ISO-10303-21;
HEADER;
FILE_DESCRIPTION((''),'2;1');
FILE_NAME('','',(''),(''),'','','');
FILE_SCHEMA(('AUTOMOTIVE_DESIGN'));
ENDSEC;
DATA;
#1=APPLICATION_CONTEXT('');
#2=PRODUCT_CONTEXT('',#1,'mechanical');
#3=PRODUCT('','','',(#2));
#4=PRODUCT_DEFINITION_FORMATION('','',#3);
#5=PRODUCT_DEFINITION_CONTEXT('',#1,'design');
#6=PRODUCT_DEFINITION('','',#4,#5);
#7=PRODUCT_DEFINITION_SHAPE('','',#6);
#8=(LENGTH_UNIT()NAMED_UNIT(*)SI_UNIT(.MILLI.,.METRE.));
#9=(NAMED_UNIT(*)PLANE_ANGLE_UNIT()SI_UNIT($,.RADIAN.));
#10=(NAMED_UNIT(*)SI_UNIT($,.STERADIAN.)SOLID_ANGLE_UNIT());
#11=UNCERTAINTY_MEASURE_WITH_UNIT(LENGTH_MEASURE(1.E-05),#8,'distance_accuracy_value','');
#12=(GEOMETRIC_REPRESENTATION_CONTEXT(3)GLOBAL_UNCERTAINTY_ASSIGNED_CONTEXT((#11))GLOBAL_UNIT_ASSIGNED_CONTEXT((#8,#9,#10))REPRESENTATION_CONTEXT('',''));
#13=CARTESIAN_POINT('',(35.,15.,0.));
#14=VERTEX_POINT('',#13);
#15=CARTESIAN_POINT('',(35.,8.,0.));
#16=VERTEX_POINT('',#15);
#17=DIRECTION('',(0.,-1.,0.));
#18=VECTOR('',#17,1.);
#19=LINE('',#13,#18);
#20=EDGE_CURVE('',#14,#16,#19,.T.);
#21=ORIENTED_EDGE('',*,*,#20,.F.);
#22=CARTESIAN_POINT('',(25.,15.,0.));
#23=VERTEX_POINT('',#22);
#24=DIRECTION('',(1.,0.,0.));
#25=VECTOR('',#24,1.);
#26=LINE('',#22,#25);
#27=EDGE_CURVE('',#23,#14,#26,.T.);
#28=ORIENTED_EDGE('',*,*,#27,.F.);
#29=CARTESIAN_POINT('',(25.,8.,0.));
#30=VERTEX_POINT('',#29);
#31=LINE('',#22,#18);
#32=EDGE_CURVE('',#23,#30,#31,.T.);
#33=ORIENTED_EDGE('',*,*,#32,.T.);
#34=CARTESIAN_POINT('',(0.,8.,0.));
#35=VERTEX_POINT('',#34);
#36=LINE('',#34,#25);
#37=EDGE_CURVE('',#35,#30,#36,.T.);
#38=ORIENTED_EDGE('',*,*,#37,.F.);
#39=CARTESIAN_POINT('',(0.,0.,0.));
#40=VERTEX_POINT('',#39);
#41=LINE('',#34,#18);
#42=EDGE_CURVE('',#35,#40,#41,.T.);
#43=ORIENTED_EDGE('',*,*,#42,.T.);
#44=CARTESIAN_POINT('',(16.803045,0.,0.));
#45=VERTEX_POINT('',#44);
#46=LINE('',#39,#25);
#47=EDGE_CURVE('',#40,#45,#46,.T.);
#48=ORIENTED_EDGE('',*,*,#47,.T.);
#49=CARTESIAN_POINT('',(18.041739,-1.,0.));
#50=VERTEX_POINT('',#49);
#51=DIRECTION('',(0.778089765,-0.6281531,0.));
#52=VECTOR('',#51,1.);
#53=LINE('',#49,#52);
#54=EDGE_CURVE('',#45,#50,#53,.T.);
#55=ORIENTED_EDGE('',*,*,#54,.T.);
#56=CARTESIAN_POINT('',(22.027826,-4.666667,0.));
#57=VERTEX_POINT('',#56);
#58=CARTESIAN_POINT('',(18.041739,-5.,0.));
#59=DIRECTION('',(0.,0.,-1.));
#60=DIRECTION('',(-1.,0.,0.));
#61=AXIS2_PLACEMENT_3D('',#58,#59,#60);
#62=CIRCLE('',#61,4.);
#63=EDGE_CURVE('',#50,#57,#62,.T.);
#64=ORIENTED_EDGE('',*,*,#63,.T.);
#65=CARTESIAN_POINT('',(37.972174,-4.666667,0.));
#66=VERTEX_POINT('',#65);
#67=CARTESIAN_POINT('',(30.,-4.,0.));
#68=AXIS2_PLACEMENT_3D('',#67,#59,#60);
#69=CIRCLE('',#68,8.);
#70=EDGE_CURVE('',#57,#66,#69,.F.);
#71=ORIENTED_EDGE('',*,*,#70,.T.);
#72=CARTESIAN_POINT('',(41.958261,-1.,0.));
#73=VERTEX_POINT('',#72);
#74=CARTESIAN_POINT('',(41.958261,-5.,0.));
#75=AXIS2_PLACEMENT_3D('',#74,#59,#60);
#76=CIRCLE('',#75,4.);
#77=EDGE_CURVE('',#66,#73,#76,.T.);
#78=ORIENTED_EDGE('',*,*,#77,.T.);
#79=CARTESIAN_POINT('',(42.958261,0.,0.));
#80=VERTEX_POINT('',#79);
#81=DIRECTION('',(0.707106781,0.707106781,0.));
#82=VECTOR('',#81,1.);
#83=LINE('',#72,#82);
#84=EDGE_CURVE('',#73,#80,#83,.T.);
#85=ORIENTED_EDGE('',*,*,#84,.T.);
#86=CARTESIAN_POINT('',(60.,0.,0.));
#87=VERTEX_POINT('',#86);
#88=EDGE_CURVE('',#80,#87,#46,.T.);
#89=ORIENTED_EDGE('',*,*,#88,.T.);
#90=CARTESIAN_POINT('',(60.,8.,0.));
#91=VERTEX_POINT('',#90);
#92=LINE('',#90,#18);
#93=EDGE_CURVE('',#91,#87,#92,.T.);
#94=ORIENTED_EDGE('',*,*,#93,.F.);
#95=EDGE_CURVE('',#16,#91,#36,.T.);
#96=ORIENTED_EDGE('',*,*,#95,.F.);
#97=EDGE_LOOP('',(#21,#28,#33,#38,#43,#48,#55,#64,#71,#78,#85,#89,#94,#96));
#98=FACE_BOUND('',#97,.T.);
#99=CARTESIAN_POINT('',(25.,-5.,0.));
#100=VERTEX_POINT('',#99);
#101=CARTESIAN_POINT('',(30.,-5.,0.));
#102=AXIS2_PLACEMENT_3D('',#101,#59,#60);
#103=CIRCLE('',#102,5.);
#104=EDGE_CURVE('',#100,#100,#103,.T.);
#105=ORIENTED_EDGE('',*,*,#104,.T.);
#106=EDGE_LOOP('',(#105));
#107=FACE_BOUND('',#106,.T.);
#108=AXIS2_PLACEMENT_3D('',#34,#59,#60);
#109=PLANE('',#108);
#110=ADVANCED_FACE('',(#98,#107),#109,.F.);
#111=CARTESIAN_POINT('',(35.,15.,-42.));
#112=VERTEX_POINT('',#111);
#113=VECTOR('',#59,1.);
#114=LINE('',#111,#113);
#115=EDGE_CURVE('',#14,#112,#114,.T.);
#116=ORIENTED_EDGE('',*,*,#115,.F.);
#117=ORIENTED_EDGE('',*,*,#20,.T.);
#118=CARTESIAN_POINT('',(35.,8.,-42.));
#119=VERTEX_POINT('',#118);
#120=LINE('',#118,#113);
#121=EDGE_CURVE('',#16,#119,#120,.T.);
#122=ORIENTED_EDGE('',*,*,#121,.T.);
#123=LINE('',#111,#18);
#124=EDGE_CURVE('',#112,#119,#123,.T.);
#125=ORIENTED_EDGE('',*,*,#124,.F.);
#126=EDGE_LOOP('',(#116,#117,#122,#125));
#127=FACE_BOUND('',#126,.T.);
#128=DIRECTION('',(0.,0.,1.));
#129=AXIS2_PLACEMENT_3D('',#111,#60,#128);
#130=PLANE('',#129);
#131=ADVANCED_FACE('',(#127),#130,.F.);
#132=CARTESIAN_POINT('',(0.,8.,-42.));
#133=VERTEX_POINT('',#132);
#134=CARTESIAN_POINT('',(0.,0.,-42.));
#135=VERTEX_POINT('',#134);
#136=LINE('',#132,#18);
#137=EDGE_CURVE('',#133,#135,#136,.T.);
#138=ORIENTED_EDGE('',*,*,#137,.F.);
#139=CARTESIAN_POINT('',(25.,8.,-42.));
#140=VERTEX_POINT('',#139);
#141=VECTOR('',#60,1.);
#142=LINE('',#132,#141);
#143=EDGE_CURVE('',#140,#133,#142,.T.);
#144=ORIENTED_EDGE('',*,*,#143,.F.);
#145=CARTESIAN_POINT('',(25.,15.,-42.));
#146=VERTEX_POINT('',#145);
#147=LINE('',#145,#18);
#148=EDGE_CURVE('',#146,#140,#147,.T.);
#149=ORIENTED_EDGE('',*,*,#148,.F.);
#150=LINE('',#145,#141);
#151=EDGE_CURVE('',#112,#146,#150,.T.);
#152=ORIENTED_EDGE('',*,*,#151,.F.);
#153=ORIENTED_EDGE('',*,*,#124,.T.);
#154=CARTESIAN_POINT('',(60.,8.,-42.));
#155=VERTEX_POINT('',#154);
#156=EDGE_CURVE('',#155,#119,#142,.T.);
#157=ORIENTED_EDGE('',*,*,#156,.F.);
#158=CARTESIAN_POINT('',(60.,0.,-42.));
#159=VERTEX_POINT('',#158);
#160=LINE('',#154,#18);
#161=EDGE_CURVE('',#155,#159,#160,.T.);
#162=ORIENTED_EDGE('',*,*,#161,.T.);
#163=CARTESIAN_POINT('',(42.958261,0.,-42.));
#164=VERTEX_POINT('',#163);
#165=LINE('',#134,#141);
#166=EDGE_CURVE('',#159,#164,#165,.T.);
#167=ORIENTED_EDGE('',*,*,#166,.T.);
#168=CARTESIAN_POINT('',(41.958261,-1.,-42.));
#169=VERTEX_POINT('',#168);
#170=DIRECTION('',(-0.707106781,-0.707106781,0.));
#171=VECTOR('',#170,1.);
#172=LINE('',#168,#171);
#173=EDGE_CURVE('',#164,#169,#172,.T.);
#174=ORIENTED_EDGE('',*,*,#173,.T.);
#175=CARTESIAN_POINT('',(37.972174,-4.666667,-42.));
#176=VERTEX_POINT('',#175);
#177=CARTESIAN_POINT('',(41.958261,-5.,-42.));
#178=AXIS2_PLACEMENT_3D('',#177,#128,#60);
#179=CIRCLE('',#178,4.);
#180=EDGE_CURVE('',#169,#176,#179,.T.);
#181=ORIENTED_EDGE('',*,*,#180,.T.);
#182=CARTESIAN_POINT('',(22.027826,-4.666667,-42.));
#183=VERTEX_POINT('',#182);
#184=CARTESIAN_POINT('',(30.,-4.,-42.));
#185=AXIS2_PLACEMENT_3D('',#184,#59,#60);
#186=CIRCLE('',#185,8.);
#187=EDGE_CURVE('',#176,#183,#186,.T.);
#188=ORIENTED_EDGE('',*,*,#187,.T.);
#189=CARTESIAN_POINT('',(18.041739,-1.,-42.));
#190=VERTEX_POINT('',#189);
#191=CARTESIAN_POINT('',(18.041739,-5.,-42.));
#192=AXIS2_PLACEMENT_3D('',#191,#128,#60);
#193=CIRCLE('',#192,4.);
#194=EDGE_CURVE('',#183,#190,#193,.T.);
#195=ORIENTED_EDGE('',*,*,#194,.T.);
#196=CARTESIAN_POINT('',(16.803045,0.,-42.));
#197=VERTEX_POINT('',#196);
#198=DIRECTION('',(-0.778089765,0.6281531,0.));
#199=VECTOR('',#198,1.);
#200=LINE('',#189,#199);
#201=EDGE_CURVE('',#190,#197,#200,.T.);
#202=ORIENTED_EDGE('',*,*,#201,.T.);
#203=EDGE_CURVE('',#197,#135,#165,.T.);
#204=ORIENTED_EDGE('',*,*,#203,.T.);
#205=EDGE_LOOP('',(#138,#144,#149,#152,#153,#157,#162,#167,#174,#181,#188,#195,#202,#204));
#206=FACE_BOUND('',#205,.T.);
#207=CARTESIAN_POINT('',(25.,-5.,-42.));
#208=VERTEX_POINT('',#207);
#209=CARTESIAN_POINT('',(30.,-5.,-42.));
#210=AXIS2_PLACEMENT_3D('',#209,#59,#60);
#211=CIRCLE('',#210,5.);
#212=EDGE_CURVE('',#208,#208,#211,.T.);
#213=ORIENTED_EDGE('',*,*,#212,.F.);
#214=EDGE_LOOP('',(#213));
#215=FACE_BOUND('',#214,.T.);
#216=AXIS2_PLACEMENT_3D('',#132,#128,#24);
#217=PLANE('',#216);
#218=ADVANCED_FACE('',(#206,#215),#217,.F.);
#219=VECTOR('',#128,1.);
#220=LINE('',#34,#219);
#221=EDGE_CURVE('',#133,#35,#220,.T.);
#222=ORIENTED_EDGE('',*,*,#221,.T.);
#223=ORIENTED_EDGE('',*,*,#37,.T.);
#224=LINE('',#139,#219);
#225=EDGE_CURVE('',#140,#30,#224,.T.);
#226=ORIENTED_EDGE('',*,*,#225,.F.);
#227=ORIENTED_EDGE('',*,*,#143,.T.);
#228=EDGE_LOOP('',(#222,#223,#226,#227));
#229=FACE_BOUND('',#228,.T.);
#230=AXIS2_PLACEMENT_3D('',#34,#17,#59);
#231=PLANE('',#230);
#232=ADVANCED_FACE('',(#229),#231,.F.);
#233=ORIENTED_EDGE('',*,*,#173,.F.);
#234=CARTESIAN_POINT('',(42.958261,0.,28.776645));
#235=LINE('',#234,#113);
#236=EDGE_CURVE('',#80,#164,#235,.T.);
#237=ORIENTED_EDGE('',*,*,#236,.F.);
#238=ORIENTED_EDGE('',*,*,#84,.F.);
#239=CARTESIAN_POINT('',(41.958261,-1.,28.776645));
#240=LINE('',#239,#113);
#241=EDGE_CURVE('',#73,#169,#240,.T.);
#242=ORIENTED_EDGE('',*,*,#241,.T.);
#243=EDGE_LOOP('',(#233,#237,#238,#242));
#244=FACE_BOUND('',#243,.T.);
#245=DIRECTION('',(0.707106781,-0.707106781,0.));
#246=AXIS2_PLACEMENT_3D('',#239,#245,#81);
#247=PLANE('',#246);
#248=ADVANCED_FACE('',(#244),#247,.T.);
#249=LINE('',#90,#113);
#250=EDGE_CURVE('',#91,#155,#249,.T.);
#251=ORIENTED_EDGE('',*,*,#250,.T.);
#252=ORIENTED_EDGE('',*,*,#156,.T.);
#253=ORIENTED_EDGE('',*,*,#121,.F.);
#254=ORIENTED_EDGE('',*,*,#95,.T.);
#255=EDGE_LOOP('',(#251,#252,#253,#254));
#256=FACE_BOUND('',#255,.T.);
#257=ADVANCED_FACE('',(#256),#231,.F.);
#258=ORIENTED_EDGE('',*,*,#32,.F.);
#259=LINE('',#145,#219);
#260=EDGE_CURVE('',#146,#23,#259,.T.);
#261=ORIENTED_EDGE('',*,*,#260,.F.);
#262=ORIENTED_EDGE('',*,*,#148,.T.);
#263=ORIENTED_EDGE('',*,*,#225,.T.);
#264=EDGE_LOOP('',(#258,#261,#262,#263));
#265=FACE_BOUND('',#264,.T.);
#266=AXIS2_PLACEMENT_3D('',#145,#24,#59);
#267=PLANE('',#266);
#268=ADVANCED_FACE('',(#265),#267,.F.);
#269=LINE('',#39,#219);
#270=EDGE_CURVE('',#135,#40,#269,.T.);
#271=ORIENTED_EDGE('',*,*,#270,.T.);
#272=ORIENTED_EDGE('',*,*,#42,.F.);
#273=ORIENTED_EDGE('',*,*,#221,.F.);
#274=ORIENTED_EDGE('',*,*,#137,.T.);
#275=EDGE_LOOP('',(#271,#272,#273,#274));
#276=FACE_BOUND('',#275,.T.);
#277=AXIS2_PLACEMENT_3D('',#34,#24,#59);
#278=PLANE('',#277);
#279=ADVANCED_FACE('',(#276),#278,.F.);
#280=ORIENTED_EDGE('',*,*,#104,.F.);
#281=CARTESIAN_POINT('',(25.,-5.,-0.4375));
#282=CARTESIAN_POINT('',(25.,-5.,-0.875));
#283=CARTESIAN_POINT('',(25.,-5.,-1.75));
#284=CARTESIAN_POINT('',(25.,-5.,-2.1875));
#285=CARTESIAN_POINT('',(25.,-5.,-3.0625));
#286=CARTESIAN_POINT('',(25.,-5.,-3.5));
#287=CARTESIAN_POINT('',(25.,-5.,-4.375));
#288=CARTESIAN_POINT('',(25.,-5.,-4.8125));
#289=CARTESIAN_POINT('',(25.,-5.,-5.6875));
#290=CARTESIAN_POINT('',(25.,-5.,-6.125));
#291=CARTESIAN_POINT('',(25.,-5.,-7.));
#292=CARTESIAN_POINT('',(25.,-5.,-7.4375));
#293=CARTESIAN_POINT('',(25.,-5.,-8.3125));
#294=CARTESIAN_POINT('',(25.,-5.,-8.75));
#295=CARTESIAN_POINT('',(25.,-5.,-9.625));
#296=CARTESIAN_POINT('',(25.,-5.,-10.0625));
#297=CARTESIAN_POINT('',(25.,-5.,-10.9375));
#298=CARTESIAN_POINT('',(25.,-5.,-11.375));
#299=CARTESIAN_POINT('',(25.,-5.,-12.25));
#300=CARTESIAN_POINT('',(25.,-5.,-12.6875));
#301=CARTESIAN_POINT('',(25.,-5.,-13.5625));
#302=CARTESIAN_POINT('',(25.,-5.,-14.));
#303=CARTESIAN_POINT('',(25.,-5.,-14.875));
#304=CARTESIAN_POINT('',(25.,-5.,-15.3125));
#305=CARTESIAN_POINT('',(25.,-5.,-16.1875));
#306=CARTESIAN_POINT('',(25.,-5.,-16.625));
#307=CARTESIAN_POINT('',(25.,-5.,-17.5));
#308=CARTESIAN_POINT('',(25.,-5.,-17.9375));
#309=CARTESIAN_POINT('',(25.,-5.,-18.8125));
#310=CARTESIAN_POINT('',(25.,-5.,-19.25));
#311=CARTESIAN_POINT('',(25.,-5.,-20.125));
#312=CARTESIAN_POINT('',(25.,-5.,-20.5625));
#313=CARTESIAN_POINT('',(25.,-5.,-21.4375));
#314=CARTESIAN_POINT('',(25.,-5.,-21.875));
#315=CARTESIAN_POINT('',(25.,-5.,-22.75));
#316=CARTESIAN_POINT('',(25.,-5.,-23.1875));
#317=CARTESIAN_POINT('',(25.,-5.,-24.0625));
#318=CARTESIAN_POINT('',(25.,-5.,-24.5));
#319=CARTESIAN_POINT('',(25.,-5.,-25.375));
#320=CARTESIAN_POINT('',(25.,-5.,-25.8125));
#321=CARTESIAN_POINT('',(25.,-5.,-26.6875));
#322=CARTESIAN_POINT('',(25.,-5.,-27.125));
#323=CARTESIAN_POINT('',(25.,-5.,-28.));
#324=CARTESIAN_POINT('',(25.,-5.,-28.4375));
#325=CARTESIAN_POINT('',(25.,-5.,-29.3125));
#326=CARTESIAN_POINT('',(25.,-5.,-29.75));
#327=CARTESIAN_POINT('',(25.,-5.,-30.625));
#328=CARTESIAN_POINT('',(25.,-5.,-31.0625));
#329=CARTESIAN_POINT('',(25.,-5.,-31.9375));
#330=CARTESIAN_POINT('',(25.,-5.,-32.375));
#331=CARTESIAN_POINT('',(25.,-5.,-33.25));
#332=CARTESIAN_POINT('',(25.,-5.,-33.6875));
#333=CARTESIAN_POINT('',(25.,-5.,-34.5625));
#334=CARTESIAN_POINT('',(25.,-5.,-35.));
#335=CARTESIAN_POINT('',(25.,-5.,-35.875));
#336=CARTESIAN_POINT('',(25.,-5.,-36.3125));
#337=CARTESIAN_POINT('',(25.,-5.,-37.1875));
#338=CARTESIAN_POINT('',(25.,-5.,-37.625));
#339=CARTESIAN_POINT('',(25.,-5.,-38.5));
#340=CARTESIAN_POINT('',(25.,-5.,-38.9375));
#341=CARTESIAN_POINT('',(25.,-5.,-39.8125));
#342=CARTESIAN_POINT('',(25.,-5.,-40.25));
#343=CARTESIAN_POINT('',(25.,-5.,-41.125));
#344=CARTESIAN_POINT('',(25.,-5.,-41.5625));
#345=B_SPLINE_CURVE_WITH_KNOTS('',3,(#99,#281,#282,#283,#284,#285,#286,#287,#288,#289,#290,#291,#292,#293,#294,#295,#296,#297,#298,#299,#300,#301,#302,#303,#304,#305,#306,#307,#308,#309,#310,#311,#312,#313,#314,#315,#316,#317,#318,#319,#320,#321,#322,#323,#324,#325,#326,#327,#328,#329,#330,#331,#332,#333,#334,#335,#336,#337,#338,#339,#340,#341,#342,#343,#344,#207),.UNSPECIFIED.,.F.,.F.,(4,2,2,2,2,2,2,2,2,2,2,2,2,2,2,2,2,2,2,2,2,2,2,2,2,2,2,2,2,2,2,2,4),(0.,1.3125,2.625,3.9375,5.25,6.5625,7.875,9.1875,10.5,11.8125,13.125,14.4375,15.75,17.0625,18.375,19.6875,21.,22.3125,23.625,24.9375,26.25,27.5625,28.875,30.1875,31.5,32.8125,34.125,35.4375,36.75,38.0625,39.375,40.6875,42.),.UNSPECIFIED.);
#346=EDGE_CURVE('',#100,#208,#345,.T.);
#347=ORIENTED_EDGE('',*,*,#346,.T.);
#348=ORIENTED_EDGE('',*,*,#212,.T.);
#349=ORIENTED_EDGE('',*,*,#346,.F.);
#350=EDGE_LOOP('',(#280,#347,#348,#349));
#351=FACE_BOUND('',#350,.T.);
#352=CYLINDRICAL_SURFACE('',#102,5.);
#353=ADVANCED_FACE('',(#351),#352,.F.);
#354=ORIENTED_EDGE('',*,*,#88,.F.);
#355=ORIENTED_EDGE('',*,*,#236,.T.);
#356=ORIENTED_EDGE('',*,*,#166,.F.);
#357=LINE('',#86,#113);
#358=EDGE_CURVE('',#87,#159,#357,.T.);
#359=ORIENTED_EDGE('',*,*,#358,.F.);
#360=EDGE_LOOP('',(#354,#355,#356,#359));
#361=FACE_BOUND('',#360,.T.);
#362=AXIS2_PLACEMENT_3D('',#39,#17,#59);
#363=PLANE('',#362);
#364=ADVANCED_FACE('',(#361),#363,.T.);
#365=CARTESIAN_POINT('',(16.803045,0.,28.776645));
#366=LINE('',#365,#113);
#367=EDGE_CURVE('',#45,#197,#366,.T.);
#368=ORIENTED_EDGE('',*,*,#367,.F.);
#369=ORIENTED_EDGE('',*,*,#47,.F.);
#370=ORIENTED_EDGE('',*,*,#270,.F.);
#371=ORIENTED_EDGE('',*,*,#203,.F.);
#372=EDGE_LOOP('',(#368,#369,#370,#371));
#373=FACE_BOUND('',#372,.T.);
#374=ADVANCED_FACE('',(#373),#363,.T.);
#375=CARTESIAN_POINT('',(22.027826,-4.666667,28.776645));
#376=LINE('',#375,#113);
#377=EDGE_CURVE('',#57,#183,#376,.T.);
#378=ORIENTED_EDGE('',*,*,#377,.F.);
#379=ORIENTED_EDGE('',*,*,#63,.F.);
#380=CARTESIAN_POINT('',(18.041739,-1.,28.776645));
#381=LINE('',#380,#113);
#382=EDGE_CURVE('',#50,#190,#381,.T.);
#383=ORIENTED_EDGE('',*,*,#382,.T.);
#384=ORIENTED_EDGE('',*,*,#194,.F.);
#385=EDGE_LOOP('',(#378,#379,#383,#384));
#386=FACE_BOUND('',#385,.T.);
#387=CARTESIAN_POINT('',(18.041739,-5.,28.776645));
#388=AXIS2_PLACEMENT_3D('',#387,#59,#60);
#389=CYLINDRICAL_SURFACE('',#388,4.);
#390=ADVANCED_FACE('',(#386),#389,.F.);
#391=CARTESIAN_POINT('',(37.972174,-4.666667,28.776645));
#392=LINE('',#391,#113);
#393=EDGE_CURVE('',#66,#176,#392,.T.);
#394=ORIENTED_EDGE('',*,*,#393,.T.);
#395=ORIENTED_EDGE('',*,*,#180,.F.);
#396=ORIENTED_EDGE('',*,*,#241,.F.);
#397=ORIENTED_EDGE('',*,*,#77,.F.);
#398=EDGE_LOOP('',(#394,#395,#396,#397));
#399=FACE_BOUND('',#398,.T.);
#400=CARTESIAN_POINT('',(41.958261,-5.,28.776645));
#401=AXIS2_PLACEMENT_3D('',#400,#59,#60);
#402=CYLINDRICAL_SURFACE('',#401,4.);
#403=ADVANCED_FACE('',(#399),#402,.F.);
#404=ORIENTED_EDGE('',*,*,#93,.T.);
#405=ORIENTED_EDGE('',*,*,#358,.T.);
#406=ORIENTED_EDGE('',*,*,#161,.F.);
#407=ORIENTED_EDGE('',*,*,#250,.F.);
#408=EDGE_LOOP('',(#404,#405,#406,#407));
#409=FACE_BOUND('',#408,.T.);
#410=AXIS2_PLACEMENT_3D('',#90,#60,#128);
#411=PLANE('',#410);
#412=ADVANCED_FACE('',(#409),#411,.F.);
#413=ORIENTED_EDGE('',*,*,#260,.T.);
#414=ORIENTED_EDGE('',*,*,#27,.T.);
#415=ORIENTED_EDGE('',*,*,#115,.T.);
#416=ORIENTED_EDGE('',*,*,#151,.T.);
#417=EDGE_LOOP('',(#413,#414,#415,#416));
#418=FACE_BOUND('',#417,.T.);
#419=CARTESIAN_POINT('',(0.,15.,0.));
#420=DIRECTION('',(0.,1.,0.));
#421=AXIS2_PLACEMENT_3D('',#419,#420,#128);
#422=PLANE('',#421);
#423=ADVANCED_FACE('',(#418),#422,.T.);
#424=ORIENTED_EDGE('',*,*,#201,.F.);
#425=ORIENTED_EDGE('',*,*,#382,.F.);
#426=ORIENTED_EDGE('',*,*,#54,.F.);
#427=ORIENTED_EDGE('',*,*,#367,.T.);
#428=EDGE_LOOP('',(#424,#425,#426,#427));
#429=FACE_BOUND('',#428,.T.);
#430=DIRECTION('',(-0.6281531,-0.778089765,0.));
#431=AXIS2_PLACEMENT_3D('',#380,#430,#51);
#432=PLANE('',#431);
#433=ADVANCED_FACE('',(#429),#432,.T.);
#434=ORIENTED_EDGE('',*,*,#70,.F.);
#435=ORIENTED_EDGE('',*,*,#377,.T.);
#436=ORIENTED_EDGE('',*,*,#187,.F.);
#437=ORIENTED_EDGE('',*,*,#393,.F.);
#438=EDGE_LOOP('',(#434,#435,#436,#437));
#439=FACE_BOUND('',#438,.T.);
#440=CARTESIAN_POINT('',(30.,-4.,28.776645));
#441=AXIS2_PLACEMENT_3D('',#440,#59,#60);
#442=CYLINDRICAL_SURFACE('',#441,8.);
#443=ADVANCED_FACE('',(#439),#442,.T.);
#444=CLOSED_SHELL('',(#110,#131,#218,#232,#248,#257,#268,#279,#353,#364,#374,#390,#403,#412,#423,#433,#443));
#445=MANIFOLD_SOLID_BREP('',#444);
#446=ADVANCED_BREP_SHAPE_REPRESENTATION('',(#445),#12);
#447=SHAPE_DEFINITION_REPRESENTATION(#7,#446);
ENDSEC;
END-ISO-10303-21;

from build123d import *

# Parameters (mm, degrees)
SKETCH1_W           = 60
SKETCH1_H           = 42
BOSS_EXTRUDE1_DEPTH = 8
SKETCH3_W           = 10
SKETCH3_H           = 42
BOSS_EXTRUDE5_DEPTH = 7
SKETCH5_W           = 14
SKETCH5_H           = 42
BOSS_EXTRUDE6_DEPTH = 11
SKETCH6_R           = 5
CUT_EXTRUDE1_DEPTH  = 75.759614766
FILLET1_R           = 7
FILLET2_R           = 5
FILLET3_R           = 5
BOSS_EXTRUDE7_DEPTH = 42


with BuildPart() as part:
    # Sketch1 → Boss-Extrude1 (new body)
    with BuildSketch(Plane(origin=(0, 0, 0), x_dir=(1, 0, 0), z_dir=(0, 1, 0))):
        with Locations((30, 21)):
            Rectangle(SKETCH1_W, SKETCH1_H)
    extrude(amount=BOSS_EXTRUDE1_DEPTH)

    # Sketch3 → Boss-Extrude5 (add)
    with BuildSketch(Plane(origin=(0, 8, 0), x_dir=(1, 0, 0), z_dir=(0, 1, 0))):
        with Locations((30, 21)):
            Rectangle(SKETCH3_W, SKETCH3_H)
    extrude(amount=BOSS_EXTRUDE5_DEPTH)

    # Sketch5 → Boss-Extrude6 (add)
    with BuildSketch(Plane.XZ):
        with Locations((30, -21)):
            Rectangle(SKETCH5_W, SKETCH5_H)
    extrude(amount=BOSS_EXTRUDE6_DEPTH)

    # Sketch6 → Cut-Extrude1 (cut, through all)
    with BuildSketch(Plane(origin=(0, 0, -42), x_dir=(-1, 0, 0), z_dir=(0, 0, -1))):
        with Locations((-30, -5)):
            Circle(SKETCH6_R)
    extrude(amount=-CUT_EXTRUDE1_DEPTH, mode=Mode.SUBTRACT)

    # Fillet1
    fillet1_edges = [part.edges().sort_by_distance(p)[0] for p in [
        (23, -11, -21),
        (37, -11, -21),
    ]]
    fillet(fillet1_edges, radius=FILLET1_R - 0.0001)  # a hair under: the kernel refuses the full size

    # Fillet2
    fillet2_edges = [part.edges().sort_by_distance(p)[0] for p in [
        (23, 0, -21),
    ]]
    fillet(fillet2_edges, radius=FILLET2_R)

    # Fillet3
    fillet3_edges = [part.edges().sort_by_distance(p)[0] for p in [
        (37, 0, -21),
    ]]
    fillet(fillet3_edges, radius=FILLET3_R)

    # Sketch8 → Boss-Extrude7 (add)
    with BuildSketch(Plane(origin=(0, 0, -42), x_dir=(-1, 0, 0), z_dir=(0, 0, -1))):
        with BuildLine():
            Line((-41.958260743, -1), (-42.958260743, 0))
            Line((-42.958260743, 0), (-41.958260743, 0))
            ThreePointArc((-41.958260743, 0), (-38.573244741, -1.320099639), (-36.9756521, -4.583333333))
            ThreePointArc((-36.9756521, -4.583333333), (-34.739022403, -9.151860505), (-30, -11))
            ThreePointArc((-30, -11), (-25.260977597, -9.151860505), (-23.0243479, -4.583333333))
            ThreePointArc((-23.0243479, -4.583333333), (-21.426755259, -1.320099639), (-18.041739257, 0))
            Line((-18.041739257, 0), (-16.803044796, 0))
            Line((-16.803044796, 0), (-18.041739257, -1))
            ThreePointArc((-18.041739257, -1), (-20.749752058, -2.056079711), (-22.027826171, -4.666666667))
            ThreePointArc((-22.027826171, -4.666666667), (-24.583974397, -9.887840578), (-30, -12))
            ThreePointArc((-30, -12), (-35.416025603, -9.887840578), (-37.972173829, -4.666666667))
            ThreePointArc((-37.972173829, -4.666666667), (-39.250247942, -2.056079711), (-41.958260743, -1))
        make_face()
    extrude(amount=-BOSS_EXTRUDE7_DEPTH)


solid = part.part
